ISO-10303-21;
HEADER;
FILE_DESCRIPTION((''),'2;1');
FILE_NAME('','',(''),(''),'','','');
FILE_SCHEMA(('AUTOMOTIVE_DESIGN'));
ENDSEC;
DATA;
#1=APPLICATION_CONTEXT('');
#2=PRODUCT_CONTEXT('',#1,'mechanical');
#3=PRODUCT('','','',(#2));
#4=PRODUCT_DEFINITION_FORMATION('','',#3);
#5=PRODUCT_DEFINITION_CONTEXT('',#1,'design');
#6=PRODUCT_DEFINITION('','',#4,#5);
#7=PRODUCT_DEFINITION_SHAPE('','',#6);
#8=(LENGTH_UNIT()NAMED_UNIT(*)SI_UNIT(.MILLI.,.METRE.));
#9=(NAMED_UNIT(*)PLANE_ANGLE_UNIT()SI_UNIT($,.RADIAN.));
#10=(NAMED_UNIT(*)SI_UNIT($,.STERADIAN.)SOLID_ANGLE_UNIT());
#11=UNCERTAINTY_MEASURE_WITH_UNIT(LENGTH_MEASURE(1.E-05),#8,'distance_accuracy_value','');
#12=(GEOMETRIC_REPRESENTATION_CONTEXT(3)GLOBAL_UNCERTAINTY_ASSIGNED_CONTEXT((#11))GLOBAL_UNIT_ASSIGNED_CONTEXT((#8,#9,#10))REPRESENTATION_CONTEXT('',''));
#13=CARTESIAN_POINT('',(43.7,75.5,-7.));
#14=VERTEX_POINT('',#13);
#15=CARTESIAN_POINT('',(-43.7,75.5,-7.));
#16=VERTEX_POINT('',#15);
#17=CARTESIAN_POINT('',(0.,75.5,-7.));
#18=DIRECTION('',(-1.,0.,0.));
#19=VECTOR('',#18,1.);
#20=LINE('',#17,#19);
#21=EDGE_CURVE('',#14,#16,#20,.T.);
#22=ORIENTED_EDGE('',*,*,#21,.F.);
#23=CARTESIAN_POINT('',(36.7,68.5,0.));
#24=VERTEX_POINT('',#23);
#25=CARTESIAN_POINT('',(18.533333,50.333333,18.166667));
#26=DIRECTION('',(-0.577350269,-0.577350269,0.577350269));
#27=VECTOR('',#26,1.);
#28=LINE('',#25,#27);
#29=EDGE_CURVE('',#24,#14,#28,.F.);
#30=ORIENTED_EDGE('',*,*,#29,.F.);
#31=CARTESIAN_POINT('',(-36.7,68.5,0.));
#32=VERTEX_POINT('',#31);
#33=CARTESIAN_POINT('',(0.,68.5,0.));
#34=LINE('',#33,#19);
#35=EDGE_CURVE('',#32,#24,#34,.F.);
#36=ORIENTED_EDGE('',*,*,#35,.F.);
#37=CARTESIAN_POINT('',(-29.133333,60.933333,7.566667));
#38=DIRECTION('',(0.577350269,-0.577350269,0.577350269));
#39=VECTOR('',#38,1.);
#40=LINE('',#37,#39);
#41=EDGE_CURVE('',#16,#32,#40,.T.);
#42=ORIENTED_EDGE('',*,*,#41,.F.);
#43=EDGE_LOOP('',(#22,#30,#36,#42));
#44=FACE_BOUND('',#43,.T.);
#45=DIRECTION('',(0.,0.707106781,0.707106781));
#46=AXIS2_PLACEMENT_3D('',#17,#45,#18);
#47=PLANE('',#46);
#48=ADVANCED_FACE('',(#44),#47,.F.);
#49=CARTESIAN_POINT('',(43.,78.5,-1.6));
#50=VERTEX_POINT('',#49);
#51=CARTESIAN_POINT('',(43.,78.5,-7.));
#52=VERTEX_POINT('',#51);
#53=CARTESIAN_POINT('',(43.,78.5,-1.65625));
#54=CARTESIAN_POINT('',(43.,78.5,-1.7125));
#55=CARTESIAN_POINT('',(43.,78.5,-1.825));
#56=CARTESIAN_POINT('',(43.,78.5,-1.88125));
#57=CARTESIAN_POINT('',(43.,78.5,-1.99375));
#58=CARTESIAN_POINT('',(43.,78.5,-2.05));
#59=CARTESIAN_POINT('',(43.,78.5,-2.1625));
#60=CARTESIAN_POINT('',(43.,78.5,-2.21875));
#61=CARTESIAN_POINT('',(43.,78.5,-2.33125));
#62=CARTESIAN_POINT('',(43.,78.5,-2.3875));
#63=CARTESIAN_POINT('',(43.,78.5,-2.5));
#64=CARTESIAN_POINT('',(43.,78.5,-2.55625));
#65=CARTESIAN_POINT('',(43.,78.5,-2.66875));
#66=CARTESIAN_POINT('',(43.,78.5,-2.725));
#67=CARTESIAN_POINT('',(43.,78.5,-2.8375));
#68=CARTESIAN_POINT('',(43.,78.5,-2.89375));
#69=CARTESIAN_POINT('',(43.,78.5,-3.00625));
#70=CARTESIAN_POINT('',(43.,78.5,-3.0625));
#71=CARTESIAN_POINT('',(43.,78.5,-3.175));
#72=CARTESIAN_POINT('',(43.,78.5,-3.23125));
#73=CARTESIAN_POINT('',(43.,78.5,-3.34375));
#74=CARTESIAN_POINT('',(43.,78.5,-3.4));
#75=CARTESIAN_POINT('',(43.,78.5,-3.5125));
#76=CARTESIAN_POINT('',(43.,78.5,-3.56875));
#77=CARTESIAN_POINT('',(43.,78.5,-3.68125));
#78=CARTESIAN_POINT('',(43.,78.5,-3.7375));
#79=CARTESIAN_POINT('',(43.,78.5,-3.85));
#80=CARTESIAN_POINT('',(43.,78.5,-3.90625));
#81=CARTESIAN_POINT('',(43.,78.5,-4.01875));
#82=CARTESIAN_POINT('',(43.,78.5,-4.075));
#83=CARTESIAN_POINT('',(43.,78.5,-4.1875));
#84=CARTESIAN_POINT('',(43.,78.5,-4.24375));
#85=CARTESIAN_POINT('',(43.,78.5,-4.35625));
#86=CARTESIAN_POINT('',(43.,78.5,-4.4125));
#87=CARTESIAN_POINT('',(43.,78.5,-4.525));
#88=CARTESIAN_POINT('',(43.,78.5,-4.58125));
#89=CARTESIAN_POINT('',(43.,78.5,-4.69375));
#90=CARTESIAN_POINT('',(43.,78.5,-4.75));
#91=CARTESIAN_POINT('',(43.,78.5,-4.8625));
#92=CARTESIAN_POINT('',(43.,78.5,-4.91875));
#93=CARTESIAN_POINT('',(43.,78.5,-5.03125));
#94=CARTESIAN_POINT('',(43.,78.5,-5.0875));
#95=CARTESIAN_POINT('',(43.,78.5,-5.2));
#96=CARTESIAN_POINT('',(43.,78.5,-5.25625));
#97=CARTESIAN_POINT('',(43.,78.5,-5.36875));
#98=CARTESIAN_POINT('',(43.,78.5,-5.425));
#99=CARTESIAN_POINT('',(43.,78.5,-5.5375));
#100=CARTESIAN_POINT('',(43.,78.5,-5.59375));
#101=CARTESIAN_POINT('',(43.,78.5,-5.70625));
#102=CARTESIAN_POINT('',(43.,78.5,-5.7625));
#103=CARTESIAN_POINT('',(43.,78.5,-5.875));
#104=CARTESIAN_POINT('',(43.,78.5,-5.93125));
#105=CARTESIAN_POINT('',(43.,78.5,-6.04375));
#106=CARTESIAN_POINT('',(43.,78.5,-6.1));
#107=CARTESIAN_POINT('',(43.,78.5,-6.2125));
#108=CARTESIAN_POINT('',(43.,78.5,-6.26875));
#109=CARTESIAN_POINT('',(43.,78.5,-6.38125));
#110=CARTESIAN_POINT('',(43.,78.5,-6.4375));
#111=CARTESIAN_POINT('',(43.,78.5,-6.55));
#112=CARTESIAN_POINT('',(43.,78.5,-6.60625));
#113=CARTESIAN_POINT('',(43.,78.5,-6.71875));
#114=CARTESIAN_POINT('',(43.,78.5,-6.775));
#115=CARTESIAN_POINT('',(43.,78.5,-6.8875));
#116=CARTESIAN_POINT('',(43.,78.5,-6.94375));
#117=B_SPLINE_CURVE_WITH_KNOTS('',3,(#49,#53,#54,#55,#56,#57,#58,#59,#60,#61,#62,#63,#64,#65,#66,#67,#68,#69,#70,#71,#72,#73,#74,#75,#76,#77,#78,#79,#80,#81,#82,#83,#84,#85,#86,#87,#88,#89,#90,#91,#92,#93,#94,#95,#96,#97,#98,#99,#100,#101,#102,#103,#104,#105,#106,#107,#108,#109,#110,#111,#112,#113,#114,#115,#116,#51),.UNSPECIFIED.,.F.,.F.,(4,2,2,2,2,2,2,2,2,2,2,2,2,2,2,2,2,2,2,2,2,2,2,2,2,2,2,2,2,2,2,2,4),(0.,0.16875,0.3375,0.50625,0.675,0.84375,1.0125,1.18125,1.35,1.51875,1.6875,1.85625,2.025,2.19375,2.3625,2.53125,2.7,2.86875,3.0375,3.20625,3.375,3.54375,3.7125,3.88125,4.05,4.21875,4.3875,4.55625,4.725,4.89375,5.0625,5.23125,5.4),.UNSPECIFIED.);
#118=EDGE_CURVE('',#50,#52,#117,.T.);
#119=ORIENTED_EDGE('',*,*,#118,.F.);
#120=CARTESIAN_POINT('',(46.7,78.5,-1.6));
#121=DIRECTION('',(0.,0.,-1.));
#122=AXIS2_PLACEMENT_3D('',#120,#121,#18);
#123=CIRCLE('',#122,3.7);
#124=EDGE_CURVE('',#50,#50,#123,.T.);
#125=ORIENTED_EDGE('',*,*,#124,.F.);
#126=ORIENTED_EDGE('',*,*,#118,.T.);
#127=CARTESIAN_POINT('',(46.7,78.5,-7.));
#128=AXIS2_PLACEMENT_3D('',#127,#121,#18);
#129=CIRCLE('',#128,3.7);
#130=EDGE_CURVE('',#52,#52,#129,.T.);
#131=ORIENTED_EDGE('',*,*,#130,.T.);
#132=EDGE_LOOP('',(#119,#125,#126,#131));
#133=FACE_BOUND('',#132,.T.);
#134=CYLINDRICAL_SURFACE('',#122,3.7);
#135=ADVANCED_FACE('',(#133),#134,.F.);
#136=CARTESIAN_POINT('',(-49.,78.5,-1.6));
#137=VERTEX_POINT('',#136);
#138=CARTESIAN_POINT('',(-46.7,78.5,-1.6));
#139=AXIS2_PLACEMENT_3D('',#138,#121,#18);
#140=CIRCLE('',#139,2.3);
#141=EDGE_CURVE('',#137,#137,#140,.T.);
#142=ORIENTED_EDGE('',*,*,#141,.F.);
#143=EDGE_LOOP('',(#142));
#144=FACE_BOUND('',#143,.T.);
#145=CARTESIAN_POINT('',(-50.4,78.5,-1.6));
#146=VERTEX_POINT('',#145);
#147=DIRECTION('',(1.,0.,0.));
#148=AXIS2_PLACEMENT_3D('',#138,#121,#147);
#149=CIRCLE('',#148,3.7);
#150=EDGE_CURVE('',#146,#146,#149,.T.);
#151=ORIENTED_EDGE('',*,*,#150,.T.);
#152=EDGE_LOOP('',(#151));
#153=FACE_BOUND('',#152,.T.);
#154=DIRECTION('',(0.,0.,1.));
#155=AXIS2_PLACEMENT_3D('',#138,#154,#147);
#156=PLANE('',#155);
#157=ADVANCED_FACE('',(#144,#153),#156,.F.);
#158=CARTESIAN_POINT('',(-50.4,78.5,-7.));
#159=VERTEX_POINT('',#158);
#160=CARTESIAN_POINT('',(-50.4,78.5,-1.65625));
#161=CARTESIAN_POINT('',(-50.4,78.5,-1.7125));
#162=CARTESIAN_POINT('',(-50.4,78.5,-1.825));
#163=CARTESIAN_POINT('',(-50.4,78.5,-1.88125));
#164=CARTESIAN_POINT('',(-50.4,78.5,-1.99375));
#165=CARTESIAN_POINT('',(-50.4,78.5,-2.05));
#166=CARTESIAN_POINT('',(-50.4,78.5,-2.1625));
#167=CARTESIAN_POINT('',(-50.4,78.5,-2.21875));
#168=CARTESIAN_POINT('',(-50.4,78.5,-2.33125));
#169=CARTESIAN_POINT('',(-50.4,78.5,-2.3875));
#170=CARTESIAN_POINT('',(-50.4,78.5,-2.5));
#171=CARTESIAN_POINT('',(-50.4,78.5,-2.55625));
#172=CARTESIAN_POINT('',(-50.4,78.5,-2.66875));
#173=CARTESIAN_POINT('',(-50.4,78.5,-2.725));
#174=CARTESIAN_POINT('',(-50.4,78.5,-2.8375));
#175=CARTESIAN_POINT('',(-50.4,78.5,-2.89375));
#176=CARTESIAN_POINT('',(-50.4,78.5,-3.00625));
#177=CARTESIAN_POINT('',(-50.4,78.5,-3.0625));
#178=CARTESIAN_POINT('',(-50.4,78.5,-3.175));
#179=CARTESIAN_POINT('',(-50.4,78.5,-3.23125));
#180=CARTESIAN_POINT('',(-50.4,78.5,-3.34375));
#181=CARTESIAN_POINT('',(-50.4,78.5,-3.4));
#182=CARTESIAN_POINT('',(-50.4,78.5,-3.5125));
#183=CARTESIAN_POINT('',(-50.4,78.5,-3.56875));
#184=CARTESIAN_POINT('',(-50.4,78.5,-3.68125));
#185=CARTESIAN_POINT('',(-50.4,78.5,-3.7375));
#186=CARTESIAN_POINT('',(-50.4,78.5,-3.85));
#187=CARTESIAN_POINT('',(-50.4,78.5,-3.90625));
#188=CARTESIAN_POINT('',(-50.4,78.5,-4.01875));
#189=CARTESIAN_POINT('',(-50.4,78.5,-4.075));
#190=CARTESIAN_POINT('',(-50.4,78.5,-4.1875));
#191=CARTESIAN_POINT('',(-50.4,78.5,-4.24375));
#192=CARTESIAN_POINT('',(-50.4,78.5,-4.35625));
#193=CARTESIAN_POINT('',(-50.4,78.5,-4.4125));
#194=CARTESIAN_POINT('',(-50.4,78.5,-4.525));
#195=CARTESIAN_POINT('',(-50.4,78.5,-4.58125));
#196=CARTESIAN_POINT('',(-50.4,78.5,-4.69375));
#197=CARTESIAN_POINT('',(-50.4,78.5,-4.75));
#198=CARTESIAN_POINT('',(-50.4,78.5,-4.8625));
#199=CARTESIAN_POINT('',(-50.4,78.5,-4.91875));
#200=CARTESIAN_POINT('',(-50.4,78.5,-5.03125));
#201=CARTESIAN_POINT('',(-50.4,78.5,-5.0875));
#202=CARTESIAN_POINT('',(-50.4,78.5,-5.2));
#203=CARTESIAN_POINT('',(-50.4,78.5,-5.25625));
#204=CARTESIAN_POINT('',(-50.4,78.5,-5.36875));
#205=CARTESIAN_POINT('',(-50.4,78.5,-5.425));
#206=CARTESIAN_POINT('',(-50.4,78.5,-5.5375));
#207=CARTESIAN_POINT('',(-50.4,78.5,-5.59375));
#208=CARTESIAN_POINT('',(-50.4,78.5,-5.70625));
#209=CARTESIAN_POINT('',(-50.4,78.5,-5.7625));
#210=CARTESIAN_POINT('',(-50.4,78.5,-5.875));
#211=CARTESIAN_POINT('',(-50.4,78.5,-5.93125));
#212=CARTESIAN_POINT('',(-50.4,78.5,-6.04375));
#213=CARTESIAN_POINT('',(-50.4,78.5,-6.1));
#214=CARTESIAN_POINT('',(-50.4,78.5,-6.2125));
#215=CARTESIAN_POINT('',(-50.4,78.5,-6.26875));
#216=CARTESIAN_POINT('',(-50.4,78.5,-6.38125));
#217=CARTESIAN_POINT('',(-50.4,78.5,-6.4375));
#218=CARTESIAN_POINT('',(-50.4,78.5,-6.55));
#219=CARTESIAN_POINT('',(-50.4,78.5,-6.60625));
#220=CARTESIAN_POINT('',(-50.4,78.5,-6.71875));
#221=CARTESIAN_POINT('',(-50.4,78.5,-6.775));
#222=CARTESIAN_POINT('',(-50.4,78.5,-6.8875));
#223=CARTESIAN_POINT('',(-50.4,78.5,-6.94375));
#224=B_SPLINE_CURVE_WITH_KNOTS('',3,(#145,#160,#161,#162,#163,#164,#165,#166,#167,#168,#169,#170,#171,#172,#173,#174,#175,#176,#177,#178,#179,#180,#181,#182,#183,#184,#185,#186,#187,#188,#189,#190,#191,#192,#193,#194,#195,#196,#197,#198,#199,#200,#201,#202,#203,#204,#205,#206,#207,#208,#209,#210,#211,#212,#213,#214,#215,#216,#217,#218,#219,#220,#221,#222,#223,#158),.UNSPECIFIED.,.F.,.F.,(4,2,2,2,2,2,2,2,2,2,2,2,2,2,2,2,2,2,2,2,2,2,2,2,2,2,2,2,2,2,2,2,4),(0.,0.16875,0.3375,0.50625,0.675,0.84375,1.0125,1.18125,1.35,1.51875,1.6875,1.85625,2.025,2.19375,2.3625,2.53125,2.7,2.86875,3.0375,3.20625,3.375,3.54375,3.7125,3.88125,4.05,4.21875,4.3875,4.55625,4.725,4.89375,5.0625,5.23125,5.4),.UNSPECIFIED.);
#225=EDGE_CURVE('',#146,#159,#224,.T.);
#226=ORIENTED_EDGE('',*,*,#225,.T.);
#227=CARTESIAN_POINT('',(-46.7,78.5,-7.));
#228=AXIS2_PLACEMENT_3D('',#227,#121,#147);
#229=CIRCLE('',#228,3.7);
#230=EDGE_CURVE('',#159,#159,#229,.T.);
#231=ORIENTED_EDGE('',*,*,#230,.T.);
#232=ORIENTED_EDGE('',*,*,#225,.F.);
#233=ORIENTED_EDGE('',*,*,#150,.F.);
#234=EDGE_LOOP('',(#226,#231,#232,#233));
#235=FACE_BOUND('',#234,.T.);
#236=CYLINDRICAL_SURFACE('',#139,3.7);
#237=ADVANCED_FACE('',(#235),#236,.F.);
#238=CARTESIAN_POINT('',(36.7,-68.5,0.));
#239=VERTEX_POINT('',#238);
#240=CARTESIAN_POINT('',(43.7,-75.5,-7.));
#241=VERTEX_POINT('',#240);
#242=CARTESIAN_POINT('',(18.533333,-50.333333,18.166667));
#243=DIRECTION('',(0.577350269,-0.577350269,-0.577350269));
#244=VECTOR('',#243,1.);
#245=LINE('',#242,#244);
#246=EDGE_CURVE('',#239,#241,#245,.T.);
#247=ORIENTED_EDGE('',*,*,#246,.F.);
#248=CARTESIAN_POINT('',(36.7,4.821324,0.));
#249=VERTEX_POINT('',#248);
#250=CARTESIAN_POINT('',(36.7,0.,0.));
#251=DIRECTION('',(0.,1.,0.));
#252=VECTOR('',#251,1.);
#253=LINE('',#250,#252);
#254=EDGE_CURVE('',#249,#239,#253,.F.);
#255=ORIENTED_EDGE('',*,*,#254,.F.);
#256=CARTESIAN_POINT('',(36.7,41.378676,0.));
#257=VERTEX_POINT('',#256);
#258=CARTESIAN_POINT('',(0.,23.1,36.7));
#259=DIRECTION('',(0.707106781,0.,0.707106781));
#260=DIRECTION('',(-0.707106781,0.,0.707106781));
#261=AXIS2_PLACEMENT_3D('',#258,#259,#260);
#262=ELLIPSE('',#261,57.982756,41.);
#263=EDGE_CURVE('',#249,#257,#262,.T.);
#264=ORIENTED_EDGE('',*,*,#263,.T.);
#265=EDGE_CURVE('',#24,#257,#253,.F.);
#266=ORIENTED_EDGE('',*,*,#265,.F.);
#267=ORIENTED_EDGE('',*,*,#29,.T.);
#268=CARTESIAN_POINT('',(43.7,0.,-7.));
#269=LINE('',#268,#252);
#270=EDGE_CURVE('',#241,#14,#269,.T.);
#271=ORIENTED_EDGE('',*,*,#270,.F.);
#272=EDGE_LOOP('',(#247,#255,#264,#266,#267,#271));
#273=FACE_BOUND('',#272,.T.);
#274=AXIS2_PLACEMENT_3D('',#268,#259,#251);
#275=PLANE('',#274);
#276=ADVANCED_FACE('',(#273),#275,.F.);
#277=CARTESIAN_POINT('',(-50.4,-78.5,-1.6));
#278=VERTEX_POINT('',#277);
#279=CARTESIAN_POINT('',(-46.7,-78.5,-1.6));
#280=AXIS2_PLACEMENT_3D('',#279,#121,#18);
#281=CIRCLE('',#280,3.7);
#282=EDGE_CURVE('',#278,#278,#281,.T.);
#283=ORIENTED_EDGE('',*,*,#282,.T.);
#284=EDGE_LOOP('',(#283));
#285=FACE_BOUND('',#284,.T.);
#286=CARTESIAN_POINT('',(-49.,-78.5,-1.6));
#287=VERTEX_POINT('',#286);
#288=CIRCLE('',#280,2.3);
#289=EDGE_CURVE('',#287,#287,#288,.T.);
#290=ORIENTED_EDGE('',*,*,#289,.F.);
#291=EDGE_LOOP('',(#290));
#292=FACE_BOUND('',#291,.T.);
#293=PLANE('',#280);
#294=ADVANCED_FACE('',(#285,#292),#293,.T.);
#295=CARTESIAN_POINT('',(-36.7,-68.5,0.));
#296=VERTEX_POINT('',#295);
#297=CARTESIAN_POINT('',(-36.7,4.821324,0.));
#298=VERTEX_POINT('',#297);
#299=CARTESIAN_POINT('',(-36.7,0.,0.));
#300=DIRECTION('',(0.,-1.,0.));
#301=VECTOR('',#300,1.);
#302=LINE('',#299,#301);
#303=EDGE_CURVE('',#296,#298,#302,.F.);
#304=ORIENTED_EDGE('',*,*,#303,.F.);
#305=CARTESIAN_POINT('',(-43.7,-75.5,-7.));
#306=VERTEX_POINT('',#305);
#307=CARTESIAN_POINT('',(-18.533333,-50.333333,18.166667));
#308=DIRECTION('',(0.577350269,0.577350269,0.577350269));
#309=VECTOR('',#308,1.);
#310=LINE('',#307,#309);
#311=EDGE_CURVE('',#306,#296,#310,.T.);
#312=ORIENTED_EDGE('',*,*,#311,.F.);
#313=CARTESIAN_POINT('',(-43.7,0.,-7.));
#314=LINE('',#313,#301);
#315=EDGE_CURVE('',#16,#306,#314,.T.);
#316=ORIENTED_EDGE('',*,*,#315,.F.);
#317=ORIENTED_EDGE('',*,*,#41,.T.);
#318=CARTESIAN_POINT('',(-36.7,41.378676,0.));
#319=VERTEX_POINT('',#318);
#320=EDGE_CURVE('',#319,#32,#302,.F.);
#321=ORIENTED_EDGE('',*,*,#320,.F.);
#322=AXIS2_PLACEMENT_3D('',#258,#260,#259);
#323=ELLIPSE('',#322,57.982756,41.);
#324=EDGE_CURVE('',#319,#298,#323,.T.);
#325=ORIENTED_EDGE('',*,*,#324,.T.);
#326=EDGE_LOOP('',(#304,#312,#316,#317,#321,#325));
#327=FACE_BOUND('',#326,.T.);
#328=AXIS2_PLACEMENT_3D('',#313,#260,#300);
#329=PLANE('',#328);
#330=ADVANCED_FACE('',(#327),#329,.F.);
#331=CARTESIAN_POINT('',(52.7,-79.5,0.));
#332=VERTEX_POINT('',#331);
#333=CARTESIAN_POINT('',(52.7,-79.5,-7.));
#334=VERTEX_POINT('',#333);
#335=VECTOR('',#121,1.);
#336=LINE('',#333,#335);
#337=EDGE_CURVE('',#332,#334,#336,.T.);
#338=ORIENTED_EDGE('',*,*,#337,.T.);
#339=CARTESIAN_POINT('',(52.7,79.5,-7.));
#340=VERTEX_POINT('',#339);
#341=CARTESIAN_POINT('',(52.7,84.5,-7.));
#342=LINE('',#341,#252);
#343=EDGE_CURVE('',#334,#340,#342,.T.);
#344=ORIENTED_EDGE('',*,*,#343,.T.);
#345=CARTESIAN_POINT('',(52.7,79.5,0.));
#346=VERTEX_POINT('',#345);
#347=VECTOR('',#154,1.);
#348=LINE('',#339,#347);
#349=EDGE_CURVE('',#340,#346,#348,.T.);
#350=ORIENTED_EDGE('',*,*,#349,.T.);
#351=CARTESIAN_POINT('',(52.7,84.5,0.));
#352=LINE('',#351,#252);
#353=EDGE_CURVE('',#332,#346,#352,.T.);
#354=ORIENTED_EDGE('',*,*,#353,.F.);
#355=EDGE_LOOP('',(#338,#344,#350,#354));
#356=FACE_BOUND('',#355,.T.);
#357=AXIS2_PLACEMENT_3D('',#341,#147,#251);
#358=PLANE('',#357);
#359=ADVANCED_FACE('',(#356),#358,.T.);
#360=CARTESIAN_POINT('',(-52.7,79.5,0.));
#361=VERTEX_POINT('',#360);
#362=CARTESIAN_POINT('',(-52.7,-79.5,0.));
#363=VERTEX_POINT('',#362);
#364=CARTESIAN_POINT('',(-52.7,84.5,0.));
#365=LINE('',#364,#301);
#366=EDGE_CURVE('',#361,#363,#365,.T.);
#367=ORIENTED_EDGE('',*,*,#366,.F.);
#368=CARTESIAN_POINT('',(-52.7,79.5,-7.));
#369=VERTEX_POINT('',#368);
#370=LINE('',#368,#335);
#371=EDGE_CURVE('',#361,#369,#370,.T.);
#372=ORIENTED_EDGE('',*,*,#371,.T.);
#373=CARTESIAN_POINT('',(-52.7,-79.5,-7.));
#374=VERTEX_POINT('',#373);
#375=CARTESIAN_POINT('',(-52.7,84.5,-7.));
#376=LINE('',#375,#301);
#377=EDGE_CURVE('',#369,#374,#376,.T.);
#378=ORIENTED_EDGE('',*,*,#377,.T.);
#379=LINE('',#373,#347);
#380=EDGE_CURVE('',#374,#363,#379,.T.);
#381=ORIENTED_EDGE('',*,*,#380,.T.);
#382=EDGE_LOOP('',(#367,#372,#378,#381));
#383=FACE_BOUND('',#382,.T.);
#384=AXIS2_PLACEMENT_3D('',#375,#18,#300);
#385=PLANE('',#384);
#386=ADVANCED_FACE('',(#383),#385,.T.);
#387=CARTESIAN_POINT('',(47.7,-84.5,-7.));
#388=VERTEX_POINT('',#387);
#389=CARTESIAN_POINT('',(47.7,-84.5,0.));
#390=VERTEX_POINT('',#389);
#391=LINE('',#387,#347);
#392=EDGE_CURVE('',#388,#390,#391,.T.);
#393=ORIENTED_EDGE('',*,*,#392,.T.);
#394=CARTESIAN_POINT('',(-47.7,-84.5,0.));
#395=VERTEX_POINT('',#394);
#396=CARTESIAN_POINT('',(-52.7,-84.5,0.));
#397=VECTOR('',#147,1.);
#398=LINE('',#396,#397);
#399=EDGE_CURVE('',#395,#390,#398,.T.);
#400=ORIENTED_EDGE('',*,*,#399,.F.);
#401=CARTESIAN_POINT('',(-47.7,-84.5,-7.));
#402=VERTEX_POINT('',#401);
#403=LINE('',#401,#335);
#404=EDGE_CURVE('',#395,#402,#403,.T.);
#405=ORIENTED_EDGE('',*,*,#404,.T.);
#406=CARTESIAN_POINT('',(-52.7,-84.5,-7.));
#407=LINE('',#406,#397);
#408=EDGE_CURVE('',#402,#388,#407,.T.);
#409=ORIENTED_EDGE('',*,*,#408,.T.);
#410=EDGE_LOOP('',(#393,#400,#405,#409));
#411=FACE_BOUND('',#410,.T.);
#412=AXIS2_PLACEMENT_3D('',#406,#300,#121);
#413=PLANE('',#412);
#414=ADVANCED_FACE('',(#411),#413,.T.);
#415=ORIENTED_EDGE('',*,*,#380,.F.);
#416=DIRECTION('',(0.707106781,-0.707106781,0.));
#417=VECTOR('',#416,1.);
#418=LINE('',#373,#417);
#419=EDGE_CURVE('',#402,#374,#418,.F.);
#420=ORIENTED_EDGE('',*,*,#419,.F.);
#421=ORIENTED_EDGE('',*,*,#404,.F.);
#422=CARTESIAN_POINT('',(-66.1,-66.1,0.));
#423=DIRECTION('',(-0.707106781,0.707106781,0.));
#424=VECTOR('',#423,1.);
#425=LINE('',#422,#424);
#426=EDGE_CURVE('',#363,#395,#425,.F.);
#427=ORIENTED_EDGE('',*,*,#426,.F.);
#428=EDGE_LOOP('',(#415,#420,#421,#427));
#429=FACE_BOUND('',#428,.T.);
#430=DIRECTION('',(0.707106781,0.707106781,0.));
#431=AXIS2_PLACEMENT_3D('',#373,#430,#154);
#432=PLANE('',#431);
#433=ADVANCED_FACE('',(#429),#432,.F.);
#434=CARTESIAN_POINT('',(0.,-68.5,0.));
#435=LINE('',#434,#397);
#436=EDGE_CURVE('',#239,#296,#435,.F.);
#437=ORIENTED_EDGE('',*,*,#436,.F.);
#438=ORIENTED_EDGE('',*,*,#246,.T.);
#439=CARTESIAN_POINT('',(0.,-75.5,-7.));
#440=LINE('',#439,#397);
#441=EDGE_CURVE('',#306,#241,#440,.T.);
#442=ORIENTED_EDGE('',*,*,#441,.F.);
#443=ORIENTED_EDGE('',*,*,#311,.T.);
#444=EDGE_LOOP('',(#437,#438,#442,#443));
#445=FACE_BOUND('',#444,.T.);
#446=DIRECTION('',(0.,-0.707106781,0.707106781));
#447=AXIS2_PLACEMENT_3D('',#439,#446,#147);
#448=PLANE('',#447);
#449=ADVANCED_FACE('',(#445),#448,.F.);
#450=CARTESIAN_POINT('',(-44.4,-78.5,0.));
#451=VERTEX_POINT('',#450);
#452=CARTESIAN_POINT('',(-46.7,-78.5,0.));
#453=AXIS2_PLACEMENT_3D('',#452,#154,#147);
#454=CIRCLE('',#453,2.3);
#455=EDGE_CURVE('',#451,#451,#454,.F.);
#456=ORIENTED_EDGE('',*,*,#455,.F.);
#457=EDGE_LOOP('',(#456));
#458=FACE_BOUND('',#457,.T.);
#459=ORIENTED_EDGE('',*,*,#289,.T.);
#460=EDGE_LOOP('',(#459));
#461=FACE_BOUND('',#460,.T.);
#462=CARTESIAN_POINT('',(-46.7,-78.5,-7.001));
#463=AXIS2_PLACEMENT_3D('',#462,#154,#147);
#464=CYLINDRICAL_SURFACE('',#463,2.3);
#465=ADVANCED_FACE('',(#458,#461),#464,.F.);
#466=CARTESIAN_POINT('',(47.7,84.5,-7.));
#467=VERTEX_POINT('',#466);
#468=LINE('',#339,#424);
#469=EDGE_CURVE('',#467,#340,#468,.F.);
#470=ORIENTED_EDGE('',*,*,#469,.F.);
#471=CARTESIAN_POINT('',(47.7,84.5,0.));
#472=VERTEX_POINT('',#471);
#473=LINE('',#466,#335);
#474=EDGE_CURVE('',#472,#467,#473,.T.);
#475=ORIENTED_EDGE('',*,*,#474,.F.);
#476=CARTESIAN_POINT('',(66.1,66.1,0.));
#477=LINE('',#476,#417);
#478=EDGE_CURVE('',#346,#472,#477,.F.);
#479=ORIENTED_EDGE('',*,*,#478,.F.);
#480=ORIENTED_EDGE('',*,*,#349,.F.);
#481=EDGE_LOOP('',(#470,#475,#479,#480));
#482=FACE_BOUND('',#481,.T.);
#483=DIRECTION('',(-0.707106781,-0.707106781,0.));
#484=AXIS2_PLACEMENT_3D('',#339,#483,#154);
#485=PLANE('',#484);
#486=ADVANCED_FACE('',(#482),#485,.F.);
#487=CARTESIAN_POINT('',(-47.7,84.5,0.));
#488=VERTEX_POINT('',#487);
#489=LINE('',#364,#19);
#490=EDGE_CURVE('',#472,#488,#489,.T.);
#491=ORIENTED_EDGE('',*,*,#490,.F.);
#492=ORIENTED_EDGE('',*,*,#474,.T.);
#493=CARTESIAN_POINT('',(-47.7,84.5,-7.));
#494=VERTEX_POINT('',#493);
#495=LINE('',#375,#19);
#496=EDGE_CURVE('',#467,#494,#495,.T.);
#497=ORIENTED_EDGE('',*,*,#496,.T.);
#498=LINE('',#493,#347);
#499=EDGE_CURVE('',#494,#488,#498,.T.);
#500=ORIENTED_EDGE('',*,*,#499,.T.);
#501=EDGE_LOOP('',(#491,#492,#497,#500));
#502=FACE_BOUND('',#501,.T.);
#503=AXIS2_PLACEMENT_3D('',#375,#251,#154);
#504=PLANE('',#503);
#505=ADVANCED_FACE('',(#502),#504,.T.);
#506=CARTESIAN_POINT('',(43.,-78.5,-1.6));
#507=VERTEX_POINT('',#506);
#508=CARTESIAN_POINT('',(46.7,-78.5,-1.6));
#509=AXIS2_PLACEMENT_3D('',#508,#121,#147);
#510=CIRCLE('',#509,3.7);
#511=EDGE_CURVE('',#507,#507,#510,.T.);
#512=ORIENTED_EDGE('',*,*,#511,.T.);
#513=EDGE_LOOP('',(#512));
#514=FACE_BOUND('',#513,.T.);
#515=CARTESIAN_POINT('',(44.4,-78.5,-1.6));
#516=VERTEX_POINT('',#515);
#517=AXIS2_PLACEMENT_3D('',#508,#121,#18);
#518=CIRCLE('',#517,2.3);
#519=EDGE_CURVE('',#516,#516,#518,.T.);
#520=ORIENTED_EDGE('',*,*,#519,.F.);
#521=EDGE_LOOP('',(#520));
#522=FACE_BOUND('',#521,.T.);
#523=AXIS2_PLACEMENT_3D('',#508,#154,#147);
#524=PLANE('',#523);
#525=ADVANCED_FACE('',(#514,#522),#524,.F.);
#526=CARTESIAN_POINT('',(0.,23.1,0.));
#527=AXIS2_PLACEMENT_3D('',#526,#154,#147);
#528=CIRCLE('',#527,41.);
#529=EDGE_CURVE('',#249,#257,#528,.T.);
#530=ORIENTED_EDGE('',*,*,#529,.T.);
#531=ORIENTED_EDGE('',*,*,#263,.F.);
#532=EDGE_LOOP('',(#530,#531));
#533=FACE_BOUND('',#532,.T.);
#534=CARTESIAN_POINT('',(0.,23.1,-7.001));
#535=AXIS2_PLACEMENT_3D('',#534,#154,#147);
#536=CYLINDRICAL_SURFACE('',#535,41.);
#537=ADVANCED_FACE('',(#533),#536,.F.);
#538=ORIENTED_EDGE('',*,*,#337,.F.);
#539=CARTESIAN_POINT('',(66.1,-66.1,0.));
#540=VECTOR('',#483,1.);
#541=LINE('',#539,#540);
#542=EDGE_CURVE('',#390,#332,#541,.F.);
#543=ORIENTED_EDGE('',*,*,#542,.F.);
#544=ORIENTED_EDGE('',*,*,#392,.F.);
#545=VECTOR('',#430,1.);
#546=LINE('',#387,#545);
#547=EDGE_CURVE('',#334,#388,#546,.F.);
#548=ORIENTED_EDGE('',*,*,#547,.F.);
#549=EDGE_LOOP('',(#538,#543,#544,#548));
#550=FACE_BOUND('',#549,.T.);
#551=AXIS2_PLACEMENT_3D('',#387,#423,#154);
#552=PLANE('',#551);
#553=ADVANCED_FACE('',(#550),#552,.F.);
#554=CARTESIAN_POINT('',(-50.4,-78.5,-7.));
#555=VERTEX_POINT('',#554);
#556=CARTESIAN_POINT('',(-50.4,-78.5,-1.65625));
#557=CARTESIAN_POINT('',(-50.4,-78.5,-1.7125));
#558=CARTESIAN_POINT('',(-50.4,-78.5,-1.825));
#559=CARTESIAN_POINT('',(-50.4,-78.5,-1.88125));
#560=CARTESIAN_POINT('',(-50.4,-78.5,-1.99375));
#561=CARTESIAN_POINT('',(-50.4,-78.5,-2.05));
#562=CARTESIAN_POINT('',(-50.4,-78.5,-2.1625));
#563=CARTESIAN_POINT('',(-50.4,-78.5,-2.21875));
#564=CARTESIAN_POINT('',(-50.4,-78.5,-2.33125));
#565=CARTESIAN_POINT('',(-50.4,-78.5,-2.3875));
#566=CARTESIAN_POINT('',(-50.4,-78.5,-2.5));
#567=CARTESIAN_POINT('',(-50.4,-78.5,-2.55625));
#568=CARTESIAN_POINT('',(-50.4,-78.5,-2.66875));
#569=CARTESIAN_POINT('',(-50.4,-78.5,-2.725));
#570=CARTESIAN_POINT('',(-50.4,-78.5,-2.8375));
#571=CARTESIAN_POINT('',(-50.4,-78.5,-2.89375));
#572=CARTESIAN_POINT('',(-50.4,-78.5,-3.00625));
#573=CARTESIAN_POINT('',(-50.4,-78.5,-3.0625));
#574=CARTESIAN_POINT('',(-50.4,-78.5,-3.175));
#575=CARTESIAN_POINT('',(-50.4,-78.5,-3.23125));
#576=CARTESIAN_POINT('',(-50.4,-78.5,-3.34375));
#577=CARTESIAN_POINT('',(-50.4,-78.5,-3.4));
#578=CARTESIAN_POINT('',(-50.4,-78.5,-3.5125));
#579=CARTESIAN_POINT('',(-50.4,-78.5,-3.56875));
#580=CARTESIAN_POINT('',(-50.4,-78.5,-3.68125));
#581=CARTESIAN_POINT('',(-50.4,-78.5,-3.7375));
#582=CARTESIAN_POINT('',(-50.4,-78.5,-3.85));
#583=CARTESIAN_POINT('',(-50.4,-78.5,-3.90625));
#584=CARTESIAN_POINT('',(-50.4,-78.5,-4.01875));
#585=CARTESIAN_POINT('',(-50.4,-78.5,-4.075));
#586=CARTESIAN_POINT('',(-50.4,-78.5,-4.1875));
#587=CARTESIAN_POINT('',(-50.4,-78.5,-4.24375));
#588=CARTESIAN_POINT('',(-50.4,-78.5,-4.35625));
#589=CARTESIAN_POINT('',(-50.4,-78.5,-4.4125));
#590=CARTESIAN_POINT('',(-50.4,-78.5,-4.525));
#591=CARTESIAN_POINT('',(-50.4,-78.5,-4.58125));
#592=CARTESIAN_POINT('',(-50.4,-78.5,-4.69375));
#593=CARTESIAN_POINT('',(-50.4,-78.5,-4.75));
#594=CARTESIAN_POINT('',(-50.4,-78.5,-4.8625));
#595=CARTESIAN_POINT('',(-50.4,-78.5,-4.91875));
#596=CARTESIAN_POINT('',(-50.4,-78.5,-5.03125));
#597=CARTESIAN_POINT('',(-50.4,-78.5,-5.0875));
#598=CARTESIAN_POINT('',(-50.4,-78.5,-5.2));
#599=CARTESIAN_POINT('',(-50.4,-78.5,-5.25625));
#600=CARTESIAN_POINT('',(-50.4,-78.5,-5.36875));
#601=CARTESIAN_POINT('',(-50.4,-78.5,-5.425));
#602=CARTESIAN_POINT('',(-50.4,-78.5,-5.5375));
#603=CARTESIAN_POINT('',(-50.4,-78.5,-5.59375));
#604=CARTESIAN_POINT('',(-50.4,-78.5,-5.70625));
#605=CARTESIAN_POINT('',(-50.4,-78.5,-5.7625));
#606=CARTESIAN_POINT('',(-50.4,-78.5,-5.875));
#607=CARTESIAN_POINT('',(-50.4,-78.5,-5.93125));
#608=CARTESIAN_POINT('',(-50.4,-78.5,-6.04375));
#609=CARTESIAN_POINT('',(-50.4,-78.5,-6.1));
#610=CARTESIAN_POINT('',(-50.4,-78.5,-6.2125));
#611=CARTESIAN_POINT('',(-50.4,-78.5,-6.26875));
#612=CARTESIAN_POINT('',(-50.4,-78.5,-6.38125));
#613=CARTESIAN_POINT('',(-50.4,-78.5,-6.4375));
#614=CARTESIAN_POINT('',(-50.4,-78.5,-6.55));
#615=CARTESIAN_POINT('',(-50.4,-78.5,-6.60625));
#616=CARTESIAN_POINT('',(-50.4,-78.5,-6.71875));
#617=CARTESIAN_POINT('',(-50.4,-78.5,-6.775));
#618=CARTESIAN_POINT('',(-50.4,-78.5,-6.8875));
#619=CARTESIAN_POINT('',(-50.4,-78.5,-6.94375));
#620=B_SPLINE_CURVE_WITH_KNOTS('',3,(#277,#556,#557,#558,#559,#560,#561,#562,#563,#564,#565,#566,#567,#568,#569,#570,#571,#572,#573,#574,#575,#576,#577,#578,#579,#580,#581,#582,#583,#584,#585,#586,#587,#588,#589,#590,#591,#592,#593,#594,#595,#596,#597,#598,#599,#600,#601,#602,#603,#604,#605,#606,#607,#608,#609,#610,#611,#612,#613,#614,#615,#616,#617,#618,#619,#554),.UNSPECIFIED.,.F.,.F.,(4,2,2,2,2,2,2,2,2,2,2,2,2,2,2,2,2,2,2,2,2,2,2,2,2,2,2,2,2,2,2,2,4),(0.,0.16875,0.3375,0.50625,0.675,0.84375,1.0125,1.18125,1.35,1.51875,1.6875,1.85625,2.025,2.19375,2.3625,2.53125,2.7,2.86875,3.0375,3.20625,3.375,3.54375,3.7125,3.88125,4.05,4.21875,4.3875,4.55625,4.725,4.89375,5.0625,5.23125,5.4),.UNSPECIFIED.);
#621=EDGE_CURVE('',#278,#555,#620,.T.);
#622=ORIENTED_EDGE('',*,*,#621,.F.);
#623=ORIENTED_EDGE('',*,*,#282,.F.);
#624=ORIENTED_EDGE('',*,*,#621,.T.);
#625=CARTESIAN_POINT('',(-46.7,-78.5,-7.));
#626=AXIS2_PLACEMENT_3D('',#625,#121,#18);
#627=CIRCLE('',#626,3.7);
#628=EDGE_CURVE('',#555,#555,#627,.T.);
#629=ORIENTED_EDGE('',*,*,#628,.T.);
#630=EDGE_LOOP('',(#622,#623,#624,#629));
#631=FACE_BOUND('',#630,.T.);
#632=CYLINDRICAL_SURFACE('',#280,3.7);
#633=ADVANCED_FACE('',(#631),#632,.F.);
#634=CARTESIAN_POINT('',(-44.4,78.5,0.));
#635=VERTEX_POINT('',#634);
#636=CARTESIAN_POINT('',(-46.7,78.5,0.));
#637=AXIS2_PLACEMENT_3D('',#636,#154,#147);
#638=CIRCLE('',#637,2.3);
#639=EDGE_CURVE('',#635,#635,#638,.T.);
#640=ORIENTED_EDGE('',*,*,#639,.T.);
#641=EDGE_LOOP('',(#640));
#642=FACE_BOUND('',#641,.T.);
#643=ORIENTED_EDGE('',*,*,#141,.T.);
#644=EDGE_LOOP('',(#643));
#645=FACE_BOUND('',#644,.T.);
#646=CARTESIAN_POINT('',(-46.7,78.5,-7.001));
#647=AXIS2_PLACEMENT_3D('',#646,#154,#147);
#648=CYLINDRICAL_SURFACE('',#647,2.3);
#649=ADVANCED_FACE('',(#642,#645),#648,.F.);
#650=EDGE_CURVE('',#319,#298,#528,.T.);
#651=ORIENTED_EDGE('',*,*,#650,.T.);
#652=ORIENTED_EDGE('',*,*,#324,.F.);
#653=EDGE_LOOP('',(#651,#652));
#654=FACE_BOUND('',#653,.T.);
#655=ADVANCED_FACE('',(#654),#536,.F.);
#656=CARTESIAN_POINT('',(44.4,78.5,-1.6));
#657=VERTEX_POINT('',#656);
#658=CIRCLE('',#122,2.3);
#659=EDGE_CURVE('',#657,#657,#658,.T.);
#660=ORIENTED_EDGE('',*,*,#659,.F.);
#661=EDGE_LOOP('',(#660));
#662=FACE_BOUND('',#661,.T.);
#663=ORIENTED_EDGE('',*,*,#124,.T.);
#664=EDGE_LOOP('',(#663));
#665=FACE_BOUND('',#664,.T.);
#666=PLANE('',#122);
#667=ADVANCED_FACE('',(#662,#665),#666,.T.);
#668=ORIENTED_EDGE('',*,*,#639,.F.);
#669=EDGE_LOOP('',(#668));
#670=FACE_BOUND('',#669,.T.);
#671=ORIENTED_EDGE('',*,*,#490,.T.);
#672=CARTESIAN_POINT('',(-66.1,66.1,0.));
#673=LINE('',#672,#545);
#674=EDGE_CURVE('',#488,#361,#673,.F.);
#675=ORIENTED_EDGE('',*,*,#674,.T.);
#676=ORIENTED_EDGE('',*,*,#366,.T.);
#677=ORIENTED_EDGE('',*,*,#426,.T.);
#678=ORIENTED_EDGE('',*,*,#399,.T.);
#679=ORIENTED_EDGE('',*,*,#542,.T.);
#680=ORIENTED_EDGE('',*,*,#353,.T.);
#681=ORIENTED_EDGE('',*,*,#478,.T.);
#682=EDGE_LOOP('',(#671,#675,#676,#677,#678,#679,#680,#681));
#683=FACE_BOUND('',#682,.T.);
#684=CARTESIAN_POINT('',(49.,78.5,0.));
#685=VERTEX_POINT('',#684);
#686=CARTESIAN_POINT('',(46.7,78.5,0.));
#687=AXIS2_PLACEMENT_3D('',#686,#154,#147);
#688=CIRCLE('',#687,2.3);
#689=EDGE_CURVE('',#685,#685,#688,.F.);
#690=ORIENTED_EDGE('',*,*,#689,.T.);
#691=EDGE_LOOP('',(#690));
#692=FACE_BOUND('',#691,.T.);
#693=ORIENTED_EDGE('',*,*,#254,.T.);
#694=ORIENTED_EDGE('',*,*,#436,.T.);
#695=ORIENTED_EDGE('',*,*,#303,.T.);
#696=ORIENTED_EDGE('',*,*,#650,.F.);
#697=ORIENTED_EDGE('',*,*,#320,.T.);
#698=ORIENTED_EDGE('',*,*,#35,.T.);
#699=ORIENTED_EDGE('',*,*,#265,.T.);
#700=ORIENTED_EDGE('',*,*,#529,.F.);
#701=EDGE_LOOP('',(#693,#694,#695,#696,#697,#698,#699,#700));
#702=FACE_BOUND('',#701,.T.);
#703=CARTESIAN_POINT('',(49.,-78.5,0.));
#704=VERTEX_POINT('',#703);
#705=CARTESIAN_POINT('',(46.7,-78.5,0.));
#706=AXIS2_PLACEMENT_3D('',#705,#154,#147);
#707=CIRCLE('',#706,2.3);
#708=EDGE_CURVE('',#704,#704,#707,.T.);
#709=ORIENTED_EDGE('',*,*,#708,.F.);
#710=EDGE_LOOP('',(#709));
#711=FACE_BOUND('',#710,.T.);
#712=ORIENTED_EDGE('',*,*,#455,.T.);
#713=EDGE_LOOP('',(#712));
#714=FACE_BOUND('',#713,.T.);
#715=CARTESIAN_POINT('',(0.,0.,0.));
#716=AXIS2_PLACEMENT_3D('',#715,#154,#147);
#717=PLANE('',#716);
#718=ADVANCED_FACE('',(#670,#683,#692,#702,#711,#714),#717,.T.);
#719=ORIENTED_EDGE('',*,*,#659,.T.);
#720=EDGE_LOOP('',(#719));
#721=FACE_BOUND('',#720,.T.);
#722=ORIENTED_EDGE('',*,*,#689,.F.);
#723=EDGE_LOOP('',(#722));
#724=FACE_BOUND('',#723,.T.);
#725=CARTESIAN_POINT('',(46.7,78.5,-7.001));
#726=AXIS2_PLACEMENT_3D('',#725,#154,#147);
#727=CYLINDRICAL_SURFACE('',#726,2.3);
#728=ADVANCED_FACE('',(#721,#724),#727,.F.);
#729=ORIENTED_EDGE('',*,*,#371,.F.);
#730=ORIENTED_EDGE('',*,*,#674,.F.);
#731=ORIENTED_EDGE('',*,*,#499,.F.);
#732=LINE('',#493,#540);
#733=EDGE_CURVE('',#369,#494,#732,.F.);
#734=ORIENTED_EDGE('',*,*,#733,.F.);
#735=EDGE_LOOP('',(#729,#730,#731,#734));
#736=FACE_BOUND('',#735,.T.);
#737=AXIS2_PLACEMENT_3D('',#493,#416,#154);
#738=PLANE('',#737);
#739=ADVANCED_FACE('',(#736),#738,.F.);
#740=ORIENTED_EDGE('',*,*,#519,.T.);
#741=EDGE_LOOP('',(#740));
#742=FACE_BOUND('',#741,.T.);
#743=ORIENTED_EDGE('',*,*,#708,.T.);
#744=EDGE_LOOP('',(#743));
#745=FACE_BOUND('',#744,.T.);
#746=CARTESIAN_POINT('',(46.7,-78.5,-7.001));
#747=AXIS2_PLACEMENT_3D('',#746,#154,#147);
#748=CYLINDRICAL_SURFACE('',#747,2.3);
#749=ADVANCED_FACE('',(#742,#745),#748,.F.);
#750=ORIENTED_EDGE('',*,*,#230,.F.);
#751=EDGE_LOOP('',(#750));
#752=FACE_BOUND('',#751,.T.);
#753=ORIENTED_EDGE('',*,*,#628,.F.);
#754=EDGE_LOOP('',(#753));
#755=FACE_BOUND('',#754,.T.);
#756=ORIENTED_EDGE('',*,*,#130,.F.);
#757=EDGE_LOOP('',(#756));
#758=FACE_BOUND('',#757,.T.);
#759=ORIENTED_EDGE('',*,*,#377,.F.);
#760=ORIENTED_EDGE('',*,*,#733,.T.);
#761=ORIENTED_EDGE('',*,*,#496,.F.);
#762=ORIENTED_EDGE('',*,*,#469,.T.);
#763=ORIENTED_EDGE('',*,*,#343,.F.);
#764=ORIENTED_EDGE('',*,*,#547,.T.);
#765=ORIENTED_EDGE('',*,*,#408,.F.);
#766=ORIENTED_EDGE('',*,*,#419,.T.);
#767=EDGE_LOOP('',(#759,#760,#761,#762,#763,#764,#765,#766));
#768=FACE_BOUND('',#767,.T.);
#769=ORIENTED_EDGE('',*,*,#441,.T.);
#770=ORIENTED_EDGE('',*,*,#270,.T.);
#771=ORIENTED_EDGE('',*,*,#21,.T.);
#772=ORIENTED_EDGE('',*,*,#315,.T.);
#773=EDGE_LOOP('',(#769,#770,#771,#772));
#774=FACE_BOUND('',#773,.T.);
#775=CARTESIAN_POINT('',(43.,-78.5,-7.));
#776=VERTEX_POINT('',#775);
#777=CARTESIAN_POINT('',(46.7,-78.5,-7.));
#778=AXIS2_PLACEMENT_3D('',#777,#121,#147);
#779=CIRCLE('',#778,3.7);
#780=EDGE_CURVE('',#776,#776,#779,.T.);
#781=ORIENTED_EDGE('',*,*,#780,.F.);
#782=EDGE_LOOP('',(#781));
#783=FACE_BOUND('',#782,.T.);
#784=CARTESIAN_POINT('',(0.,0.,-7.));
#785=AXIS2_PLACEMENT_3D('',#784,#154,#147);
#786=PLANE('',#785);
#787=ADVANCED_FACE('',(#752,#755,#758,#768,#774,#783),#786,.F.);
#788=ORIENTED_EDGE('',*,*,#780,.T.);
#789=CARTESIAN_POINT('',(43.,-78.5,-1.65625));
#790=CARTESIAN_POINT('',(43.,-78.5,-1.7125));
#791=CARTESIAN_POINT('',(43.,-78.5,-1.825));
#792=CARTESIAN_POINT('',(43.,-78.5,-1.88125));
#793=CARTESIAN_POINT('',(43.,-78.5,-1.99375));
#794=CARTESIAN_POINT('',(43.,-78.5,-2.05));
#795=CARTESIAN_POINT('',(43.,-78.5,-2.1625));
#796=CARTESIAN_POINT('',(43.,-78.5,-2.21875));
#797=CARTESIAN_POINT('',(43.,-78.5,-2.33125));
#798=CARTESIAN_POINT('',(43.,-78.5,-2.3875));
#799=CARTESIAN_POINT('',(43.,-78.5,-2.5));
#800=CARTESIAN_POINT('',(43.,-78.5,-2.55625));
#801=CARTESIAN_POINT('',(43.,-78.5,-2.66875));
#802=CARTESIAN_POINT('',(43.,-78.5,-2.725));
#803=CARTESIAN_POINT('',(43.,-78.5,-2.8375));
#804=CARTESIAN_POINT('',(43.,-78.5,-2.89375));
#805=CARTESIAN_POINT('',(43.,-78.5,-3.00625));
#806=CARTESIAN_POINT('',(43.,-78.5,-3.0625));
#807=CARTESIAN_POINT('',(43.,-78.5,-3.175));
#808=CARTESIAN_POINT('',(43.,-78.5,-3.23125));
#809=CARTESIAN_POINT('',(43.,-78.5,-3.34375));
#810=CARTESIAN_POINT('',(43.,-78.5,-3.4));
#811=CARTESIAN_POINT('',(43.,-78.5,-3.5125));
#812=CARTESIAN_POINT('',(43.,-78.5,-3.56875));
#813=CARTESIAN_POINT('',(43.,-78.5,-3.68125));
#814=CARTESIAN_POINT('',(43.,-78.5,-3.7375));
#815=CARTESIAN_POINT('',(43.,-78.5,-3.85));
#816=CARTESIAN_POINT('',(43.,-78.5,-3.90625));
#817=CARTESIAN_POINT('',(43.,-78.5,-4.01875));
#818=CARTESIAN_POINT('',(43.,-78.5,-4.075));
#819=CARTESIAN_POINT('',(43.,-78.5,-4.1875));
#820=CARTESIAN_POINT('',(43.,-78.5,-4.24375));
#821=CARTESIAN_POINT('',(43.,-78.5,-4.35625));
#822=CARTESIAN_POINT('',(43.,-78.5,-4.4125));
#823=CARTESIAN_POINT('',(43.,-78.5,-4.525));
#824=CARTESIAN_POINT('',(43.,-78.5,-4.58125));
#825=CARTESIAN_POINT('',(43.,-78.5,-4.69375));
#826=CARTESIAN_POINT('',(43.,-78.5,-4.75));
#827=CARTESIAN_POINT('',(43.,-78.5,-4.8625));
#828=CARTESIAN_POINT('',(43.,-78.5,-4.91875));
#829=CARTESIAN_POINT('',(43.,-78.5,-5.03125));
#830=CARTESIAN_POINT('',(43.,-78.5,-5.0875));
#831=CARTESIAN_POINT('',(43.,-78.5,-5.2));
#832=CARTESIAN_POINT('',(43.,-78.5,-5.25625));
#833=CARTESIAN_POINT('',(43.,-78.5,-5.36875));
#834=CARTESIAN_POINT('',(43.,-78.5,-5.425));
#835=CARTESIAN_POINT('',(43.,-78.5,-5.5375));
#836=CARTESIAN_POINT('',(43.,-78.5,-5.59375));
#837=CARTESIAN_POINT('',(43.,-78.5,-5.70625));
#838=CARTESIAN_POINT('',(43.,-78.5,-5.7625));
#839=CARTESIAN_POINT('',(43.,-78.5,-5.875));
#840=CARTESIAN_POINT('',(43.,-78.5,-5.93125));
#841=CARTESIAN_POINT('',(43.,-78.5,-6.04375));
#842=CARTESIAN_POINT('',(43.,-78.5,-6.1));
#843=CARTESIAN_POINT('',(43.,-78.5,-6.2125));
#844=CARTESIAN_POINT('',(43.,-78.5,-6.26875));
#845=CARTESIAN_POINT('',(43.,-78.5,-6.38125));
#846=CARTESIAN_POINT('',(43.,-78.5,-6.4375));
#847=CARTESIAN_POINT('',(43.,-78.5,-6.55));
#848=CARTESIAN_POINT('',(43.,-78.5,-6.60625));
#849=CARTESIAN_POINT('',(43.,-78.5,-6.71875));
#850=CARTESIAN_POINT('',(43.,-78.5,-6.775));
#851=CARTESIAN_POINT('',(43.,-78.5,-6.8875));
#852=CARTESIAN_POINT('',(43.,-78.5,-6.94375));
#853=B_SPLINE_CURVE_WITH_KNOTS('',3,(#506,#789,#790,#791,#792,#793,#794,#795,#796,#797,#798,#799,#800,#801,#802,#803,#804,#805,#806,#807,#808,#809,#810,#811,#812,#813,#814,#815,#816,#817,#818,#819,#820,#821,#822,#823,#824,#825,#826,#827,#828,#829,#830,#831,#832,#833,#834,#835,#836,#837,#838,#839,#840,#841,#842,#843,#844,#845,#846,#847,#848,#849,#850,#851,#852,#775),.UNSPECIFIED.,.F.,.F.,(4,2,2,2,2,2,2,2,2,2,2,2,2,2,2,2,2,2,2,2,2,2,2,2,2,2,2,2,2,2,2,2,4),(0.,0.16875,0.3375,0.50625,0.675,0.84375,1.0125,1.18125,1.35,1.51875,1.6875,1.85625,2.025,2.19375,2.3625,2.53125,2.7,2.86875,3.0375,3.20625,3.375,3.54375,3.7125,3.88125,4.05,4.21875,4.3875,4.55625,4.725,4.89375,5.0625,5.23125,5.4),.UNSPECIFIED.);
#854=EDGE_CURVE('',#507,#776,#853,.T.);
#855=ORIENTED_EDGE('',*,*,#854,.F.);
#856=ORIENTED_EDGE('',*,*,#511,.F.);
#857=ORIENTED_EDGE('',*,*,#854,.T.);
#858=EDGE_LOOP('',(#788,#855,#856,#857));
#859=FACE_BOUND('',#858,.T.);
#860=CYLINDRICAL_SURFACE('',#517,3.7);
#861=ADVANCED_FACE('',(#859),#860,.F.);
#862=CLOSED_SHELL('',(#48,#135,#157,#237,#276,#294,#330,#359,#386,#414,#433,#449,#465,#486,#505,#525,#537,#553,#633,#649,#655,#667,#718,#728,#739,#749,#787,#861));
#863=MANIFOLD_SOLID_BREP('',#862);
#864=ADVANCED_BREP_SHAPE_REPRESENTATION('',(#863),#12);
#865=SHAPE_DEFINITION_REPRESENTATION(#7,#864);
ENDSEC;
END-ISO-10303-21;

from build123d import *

# Parameters (mm, degrees)
ESQUISSE1_W             = 105.4
ESQUISSE1_H             = 169
ESQUISSE1_W_2           = 69.4
ESQUISSE1_H_2           = 133
BOSS_EXTRU_1_DEPTH      = 7
CHANFREIN4_SIZE         = 5
CHANFREIN3_SIZE         = 9
ENL_V_MAT_EXTRU_1_REACH = 101.833
ESQUISSE2_R             = 2.3
ENL_V_START             = -5.4
ESQUISSE5_R             = 3.7
ESQUISSE5_R_2           = 2.3
ENL_V_MAT_EXTRU_4_DEPTH = 5.4
ENL_V_START_2           = -4.3
ESQUISSE4_R             = 41
ENL_V_MAT_EXTRU_3_DEPTH = 4.3


with BuildPart() as part:
    # Esquisse1 → Boss.-Extru.1 (new body)
    with BuildSketch(Plane.XY):
        Rectangle(ESQUISSE1_W, ESQUISSE1_H)
        Rectangle(ESQUISSE1_W_2, ESQUISSE1_H_2, mode=Mode.SUBTRACT)
    extrude(amount=-BOSS_EXTRU_1_DEPTH)

    # Chanfrein4
    chanfrein4_edges = [part.edges().sort_by_distance(p)[0] for p in [
        (-52.7, 84.5, -3.5),
        (52.7, 84.5, -3.5),
        (52.7, -84.5, -3.5),
        (-52.7, -84.5, -3.5),
    ]]
    chamfer(chanfrein4_edges, length=CHANFREIN4_SIZE)

    # Chanfrein3
    # the kernel refuses this chamfer: 9 mm, written as the material it takes off along each edge
    with BuildSketch(Plane(origin=(-34.7, -66.5, -7), x_dir=(-0.9996219169112966, 0, -0.0274958766105864), z_dir=(0, 1, 0)), Plane(origin=(34.7, 66.5, -7), x_dir=(0.9996219169112966, 0, -0.0274958766105864), z_dir=(0, -1, 0))) as chanfrein3_piece_1:
        Polygon((CHANFREIN3_SIZE * 0.999621916911, CHANFREIN3_SIZE * 0.0274958766106), (-CHANFREIN3_SIZE * 0.0274958766106, CHANFREIN3_SIZE * 0.999621916911), (0, 0), align=None)
    extrude(amount=133, mode=Mode.SUBTRACT)
    with BuildSketch(Plane(origin=(-34.7, 66.5, -7), x_dir=(0, 0.9996219169112966, -0.02749587661058638), z_dir=(1, 0, 0)), Plane(origin=(34.7, -66.5, -7), x_dir=(0, -0.9996219169112966, -0.02749587661058638), z_dir=(-1, 0, 0))) as chanfrein3_piece_2:
        Polygon((CHANFREIN3_SIZE * 0.999621916911, CHANFREIN3_SIZE * 0.0274958766106), (-CHANFREIN3_SIZE * 0.0274958766106, CHANFREIN3_SIZE * 0.999621916911), (0, 0), align=None)
    extrude(amount=69.4, mode=Mode.SUBTRACT)
    with BuildSketch(Plane(origin=(-34.7, -89.645146892, -7), x_dir=(-0.9996219169112966, 0, -0.0274958766105864), z_dir=(0, 1, 0))) as chanfrein3_piece_3a_section:
        Polygon((CHANFREIN3_SIZE * 0.999621916911, CHANFREIN3_SIZE * 0.0274958766106), (-CHANFREIN3_SIZE * 0.0274958766106, CHANFREIN3_SIZE * 0.999621916911), (0, 0), align=None)
    chanfrein3_piece_3a = extrude(amount=156.145146892, mode=Mode.PRIVATE)
    chanfrein3_piece_3a = split(chanfrein3_piece_3a, bisect_by=Plane(origin=(-37.668142641, -66.5, -4.031857359), z_dir=(0, -1, 0)), keep=Keep.TOP, mode=Mode.PRIVATE)
    with BuildSketch(Plane(origin=(34.7, -66.5, -7), x_dir=(0, -0.9996219169112966, -0.02749587661058638), z_dir=(-1, 0, 0))) as chanfrein3_piece_3b_section:
        Polygon((CHANFREIN3_SIZE * 0.999621916911, CHANFREIN3_SIZE * 0.0274958766106), (-CHANFREIN3_SIZE * 0.0274958766106, CHANFREIN3_SIZE * 0.999621916911), (0, 0), align=None)
    chanfrein3_piece_3b = extrude(amount=92.545146892, mode=Mode.PRIVATE)
    chanfrein3_piece_3b = split(chanfrein3_piece_3b, bisect_by=Plane(origin=(-34.7, -69.468142641, -4.031857359), z_dir=(-1, 0, 0)), keep=Keep.TOP, mode=Mode.PRIVATE)
    chanfrein3_piece_3 = chanfrein3_piece_3a & chanfrein3_piece_3b
    add(chanfrein3_piece_3, mode=Mode.SUBTRACT)
    with BuildSketch(Plane(origin=(-34.7, -66.5, -7), x_dir=(-0.9996219169112966, 0, -0.0274958766105864), z_dir=(0, 1, 0))) as chanfrein3_piece_4a_section:
        Polygon((CHANFREIN3_SIZE * 0.999621916911, CHANFREIN3_SIZE * 0.0274958766106), (-CHANFREIN3_SIZE * 0.0274958766106, CHANFREIN3_SIZE * 0.999621916911), (0, 0), align=None)
    chanfrein3_piece_4a = extrude(amount=156.145146892, mode=Mode.PRIVATE)
    chanfrein3_piece_4a = split(chanfrein3_piece_4a, bisect_by=Plane(origin=(-37.668142641, 66.5, -4.031857359), z_dir=(0, 1, 0)), keep=Keep.TOP, mode=Mode.PRIVATE)
    with BuildSketch(Plane(origin=(-57.845146892, 66.5, -7), x_dir=(0, 0.9996219169112966, -0.02749587661058638), z_dir=(1, 0, 0))) as chanfrein3_piece_4b_section:
        Polygon((CHANFREIN3_SIZE * 0.999621916911, CHANFREIN3_SIZE * 0.0274958766106), (-CHANFREIN3_SIZE * 0.0274958766106, CHANFREIN3_SIZE * 0.999621916911), (0, 0), align=None)
    chanfrein3_piece_4b = extrude(amount=92.545146892, mode=Mode.PRIVATE)
    chanfrein3_piece_4b = split(chanfrein3_piece_4b, bisect_by=Plane(origin=(-34.7, 69.468142641, -4.031857359), z_dir=(-1, 0, 0)), keep=Keep.TOP, mode=Mode.PRIVATE)
    chanfrein3_piece_4 = chanfrein3_piece_4a & chanfrein3_piece_4b
    add(chanfrein3_piece_4, mode=Mode.SUBTRACT)
    with BuildSketch(Plane(origin=(34.7, 89.645146892, -7), x_dir=(0.9996219169112966, 0, -0.0274958766105864), z_dir=(0, -1, 0))) as chanfrein3_piece_5a_section:
        Polygon((CHANFREIN3_SIZE * 0.999621916911, CHANFREIN3_SIZE * 0.0274958766106), (-CHANFREIN3_SIZE * 0.0274958766106, CHANFREIN3_SIZE * 0.999621916911), (0, 0), align=None)
    chanfrein3_piece_5a = extrude(amount=156.145146892, mode=Mode.PRIVATE)
    chanfrein3_piece_5a = split(chanfrein3_piece_5a, bisect_by=Plane(origin=(37.668142641, 66.5, -4.031857359), z_dir=(0, 1, 0)), keep=Keep.TOP, mode=Mode.PRIVATE)
    with BuildSketch(Plane(origin=(-34.7, 66.5, -7), x_dir=(0, 0.9996219169112966, -0.02749587661058638), z_dir=(1, 0, 0))) as chanfrein3_piece_5b_section:
        Polygon((CHANFREIN3_SIZE * 0.999621916911, CHANFREIN3_SIZE * 0.0274958766106), (-CHANFREIN3_SIZE * 0.0274958766106, CHANFREIN3_SIZE * 0.999621916911), (0, 0), align=None)
    chanfrein3_piece_5b = extrude(amount=92.545146892, mode=Mode.PRIVATE)
    chanfrein3_piece_5b = split(chanfrein3_piece_5b, bisect_by=Plane(origin=(34.7, 69.468142641, -4.031857359), z_dir=(1, 0, 0)), keep=Keep.TOP, mode=Mode.PRIVATE)
    chanfrein3_piece_5 = chanfrein3_piece_5a & chanfrein3_piece_5b
    add(chanfrein3_piece_5, mode=Mode.SUBTRACT)
    with BuildSketch(Plane(origin=(57.845146892, -66.5, -7), x_dir=(0, -0.9996219169112966, -0.02749587661058638), z_dir=(-1, 0, 0))) as chanfrein3_piece_6a_section:
        Polygon((CHANFREIN3_SIZE * 0.999621916911, CHANFREIN3_SIZE * 0.0274958766106), (-CHANFREIN3_SIZE * 0.0274958766106, CHANFREIN3_SIZE * 0.999621916911), (0, 0), align=None)
    chanfrein3_piece_6a = extrude(amount=92.545146892, mode=Mode.PRIVATE)
    chanfrein3_piece_6a = split(chanfrein3_piece_6a, bisect_by=Plane(origin=(34.7, -69.468142641, -4.031857359), z_dir=(1, 0, 0)), keep=Keep.TOP, mode=Mode.PRIVATE)
    with BuildSketch(Plane(origin=(34.7, 66.5, -7), x_dir=(0.9996219169112966, 0, -0.0274958766105864), z_dir=(0, -1, 0))) as chanfrein3_piece_6b_section:
        Polygon((CHANFREIN3_SIZE * 0.999621916911, CHANFREIN3_SIZE * 0.0274958766106), (-CHANFREIN3_SIZE * 0.0274958766106, CHANFREIN3_SIZE * 0.999621916911), (0, 0), align=None)
    chanfrein3_piece_6b = extrude(amount=156.145146892, mode=Mode.PRIVATE)
    chanfrein3_piece_6b = split(chanfrein3_piece_6b, bisect_by=Plane(origin=(37.668142641, -66.5, -4.031857359), z_dir=(0, -1, 0)), keep=Keep.TOP, mode=Mode.PRIVATE)
    chanfrein3_piece_6 = chanfrein3_piece_6a & chanfrein3_piece_6b
    add(chanfrein3_piece_6, mode=Mode.SUBTRACT)

    # Esquisse2 → Enlèv. mat.-Extru.1 (cut, up to next)
    with BuildSketch(Plane.XY, mode=Mode.PRIVATE) as enl_v_mat_extru_1_sk1:
        with Locations((-46.7, 78.5)):
            Circle(ESQUISSE2_R)
    enl_v_mat_extru_1_tool1 = extrude(enl_v_mat_extru_1_sk1.sketch, amount=-ENL_V_MAT_EXTRU_1_REACH, mode=Mode.PRIVATE) & part.part
    # Esquisse2 → Enlèv. mat.-Extru.1 (cut, up to next)
    with BuildSketch(Plane.XY, mode=Mode.PRIVATE) as enl_v_mat_extru_1_sk2:
        with Locations((46.7, 78.5)):
            Circle(ESQUISSE2_R)
    enl_v_mat_extru_1_tool2 = extrude(enl_v_mat_extru_1_sk2.sketch, amount=-ENL_V_MAT_EXTRU_1_REACH, mode=Mode.PRIVATE) & part.part
    # Esquisse2 → Enlèv. mat.-Extru.1 (cut, up to next)
    with BuildSketch(Plane.XY, mode=Mode.PRIVATE) as enl_v_mat_extru_1_sk3:
        with Locations((-46.7, -78.5)):
            Circle(ESQUISSE2_R)
    enl_v_mat_extru_1_tool3 = extrude(enl_v_mat_extru_1_sk3.sketch, amount=-ENL_V_MAT_EXTRU_1_REACH, mode=Mode.PRIVATE) & part.part
    # Esquisse2 → Enlèv. mat.-Extru.1 (cut, up to next)
    with BuildSketch(Plane.XY, mode=Mode.PRIVATE) as enl_v_mat_extru_1_sk4:
        with Locations((46.7, -78.5)):
            Circle(ESQUISSE2_R)
    enl_v_mat_extru_1_tool4 = extrude(enl_v_mat_extru_1_sk4.sketch, amount=-ENL_V_MAT_EXTRU_1_REACH, mode=Mode.PRIVATE) & part.part
    add(enl_v_mat_extru_1_tool1.solids().sort_by_distance((-46.7, 78.5, 0))[0], mode=Mode.SUBTRACT)
    add(enl_v_mat_extru_1_tool2.solids().sort_by_distance((46.7, 78.5, 0))[0], mode=Mode.SUBTRACT)
    add(enl_v_mat_extru_1_tool3.solids().sort_by_distance((-46.7, -78.5, 0))[0], mode=Mode.SUBTRACT)
    add(enl_v_mat_extru_1_tool4.solids().sort_by_distance((46.7, -78.5, 0))[0], mode=Mode.SUBTRACT)

    # Esquisse5 → Enlèv. mat.-Extru.4 (cut)
    # profile 1 of 4: a face of its own
    with BuildSketch(Plane(origin=(0, 0, -7), x_dir=(-1, 0, 0), z_dir=(0, 0, -1)).offset(ENL_V_START)):
        with Locations((-46.7, 78.5)):
            Circle(ESQUISSE5_R)
        with Locations(Location((-46.7, 78.5, 0), (0, 0, 180))):
            Circle(ESQUISSE5_R_2, mode=Mode.SUBTRACT)
    # profile 2 of 4: a face of its own
    with BuildSketch(Plane(origin=(0, 0, -7), x_dir=(-1, 0, 0), z_dir=(0, 0, -1)).offset(ENL_V_START)):
        with Locations((46.7, 78.5)):
            Circle(ESQUISSE5_R)
        with Locations(Location((46.7, 78.5, 0), (0, 0, 180))):
            Circle(ESQUISSE5_R_2, mode=Mode.SUBTRACT)
    # profile 3 of 4: a face of its own
    with BuildSketch(Plane(origin=(0, 0, -7), x_dir=(-1, 0, 0), z_dir=(0, 0, -1)).offset(ENL_V_START)):
        with Locations((46.7, -78.5)):
            Circle(ESQUISSE5_R)
        with Locations(Location((46.7, -78.5, 0), (0, 0, 180))):
            Circle(ESQUISSE5_R_2, mode=Mode.SUBTRACT)
    # profile 4 of 4: a face of its own
    with BuildSketch(Plane(origin=(0, 0, -7), x_dir=(-1, 0, 0), z_dir=(0, 0, -1)).offset(ENL_V_START)):
        with Locations((-46.7, -78.5)):
            Circle(ESQUISSE5_R)
        with Locations(Location((-46.7, -78.5, 0), (0, 0, 180))):
            Circle(ESQUISSE5_R_2, mode=Mode.SUBTRACT)
    extrude(amount=ENL_V_MAT_EXTRU_4_DEPTH, mode=Mode.SUBTRACT)

    # Esquisse4 → Enlèv. mat.-Extru.3 (cut)
    with BuildSketch(Plane.XY.offset(ENL_V_START_2)):
        with Locations((0, 23.1)):
            Circle(ESQUISSE4_R)
    extrude(amount=ENL_V_MAT_EXTRU_3_DEPTH, mode=Mode.SUBTRACT)


solid = part.part
